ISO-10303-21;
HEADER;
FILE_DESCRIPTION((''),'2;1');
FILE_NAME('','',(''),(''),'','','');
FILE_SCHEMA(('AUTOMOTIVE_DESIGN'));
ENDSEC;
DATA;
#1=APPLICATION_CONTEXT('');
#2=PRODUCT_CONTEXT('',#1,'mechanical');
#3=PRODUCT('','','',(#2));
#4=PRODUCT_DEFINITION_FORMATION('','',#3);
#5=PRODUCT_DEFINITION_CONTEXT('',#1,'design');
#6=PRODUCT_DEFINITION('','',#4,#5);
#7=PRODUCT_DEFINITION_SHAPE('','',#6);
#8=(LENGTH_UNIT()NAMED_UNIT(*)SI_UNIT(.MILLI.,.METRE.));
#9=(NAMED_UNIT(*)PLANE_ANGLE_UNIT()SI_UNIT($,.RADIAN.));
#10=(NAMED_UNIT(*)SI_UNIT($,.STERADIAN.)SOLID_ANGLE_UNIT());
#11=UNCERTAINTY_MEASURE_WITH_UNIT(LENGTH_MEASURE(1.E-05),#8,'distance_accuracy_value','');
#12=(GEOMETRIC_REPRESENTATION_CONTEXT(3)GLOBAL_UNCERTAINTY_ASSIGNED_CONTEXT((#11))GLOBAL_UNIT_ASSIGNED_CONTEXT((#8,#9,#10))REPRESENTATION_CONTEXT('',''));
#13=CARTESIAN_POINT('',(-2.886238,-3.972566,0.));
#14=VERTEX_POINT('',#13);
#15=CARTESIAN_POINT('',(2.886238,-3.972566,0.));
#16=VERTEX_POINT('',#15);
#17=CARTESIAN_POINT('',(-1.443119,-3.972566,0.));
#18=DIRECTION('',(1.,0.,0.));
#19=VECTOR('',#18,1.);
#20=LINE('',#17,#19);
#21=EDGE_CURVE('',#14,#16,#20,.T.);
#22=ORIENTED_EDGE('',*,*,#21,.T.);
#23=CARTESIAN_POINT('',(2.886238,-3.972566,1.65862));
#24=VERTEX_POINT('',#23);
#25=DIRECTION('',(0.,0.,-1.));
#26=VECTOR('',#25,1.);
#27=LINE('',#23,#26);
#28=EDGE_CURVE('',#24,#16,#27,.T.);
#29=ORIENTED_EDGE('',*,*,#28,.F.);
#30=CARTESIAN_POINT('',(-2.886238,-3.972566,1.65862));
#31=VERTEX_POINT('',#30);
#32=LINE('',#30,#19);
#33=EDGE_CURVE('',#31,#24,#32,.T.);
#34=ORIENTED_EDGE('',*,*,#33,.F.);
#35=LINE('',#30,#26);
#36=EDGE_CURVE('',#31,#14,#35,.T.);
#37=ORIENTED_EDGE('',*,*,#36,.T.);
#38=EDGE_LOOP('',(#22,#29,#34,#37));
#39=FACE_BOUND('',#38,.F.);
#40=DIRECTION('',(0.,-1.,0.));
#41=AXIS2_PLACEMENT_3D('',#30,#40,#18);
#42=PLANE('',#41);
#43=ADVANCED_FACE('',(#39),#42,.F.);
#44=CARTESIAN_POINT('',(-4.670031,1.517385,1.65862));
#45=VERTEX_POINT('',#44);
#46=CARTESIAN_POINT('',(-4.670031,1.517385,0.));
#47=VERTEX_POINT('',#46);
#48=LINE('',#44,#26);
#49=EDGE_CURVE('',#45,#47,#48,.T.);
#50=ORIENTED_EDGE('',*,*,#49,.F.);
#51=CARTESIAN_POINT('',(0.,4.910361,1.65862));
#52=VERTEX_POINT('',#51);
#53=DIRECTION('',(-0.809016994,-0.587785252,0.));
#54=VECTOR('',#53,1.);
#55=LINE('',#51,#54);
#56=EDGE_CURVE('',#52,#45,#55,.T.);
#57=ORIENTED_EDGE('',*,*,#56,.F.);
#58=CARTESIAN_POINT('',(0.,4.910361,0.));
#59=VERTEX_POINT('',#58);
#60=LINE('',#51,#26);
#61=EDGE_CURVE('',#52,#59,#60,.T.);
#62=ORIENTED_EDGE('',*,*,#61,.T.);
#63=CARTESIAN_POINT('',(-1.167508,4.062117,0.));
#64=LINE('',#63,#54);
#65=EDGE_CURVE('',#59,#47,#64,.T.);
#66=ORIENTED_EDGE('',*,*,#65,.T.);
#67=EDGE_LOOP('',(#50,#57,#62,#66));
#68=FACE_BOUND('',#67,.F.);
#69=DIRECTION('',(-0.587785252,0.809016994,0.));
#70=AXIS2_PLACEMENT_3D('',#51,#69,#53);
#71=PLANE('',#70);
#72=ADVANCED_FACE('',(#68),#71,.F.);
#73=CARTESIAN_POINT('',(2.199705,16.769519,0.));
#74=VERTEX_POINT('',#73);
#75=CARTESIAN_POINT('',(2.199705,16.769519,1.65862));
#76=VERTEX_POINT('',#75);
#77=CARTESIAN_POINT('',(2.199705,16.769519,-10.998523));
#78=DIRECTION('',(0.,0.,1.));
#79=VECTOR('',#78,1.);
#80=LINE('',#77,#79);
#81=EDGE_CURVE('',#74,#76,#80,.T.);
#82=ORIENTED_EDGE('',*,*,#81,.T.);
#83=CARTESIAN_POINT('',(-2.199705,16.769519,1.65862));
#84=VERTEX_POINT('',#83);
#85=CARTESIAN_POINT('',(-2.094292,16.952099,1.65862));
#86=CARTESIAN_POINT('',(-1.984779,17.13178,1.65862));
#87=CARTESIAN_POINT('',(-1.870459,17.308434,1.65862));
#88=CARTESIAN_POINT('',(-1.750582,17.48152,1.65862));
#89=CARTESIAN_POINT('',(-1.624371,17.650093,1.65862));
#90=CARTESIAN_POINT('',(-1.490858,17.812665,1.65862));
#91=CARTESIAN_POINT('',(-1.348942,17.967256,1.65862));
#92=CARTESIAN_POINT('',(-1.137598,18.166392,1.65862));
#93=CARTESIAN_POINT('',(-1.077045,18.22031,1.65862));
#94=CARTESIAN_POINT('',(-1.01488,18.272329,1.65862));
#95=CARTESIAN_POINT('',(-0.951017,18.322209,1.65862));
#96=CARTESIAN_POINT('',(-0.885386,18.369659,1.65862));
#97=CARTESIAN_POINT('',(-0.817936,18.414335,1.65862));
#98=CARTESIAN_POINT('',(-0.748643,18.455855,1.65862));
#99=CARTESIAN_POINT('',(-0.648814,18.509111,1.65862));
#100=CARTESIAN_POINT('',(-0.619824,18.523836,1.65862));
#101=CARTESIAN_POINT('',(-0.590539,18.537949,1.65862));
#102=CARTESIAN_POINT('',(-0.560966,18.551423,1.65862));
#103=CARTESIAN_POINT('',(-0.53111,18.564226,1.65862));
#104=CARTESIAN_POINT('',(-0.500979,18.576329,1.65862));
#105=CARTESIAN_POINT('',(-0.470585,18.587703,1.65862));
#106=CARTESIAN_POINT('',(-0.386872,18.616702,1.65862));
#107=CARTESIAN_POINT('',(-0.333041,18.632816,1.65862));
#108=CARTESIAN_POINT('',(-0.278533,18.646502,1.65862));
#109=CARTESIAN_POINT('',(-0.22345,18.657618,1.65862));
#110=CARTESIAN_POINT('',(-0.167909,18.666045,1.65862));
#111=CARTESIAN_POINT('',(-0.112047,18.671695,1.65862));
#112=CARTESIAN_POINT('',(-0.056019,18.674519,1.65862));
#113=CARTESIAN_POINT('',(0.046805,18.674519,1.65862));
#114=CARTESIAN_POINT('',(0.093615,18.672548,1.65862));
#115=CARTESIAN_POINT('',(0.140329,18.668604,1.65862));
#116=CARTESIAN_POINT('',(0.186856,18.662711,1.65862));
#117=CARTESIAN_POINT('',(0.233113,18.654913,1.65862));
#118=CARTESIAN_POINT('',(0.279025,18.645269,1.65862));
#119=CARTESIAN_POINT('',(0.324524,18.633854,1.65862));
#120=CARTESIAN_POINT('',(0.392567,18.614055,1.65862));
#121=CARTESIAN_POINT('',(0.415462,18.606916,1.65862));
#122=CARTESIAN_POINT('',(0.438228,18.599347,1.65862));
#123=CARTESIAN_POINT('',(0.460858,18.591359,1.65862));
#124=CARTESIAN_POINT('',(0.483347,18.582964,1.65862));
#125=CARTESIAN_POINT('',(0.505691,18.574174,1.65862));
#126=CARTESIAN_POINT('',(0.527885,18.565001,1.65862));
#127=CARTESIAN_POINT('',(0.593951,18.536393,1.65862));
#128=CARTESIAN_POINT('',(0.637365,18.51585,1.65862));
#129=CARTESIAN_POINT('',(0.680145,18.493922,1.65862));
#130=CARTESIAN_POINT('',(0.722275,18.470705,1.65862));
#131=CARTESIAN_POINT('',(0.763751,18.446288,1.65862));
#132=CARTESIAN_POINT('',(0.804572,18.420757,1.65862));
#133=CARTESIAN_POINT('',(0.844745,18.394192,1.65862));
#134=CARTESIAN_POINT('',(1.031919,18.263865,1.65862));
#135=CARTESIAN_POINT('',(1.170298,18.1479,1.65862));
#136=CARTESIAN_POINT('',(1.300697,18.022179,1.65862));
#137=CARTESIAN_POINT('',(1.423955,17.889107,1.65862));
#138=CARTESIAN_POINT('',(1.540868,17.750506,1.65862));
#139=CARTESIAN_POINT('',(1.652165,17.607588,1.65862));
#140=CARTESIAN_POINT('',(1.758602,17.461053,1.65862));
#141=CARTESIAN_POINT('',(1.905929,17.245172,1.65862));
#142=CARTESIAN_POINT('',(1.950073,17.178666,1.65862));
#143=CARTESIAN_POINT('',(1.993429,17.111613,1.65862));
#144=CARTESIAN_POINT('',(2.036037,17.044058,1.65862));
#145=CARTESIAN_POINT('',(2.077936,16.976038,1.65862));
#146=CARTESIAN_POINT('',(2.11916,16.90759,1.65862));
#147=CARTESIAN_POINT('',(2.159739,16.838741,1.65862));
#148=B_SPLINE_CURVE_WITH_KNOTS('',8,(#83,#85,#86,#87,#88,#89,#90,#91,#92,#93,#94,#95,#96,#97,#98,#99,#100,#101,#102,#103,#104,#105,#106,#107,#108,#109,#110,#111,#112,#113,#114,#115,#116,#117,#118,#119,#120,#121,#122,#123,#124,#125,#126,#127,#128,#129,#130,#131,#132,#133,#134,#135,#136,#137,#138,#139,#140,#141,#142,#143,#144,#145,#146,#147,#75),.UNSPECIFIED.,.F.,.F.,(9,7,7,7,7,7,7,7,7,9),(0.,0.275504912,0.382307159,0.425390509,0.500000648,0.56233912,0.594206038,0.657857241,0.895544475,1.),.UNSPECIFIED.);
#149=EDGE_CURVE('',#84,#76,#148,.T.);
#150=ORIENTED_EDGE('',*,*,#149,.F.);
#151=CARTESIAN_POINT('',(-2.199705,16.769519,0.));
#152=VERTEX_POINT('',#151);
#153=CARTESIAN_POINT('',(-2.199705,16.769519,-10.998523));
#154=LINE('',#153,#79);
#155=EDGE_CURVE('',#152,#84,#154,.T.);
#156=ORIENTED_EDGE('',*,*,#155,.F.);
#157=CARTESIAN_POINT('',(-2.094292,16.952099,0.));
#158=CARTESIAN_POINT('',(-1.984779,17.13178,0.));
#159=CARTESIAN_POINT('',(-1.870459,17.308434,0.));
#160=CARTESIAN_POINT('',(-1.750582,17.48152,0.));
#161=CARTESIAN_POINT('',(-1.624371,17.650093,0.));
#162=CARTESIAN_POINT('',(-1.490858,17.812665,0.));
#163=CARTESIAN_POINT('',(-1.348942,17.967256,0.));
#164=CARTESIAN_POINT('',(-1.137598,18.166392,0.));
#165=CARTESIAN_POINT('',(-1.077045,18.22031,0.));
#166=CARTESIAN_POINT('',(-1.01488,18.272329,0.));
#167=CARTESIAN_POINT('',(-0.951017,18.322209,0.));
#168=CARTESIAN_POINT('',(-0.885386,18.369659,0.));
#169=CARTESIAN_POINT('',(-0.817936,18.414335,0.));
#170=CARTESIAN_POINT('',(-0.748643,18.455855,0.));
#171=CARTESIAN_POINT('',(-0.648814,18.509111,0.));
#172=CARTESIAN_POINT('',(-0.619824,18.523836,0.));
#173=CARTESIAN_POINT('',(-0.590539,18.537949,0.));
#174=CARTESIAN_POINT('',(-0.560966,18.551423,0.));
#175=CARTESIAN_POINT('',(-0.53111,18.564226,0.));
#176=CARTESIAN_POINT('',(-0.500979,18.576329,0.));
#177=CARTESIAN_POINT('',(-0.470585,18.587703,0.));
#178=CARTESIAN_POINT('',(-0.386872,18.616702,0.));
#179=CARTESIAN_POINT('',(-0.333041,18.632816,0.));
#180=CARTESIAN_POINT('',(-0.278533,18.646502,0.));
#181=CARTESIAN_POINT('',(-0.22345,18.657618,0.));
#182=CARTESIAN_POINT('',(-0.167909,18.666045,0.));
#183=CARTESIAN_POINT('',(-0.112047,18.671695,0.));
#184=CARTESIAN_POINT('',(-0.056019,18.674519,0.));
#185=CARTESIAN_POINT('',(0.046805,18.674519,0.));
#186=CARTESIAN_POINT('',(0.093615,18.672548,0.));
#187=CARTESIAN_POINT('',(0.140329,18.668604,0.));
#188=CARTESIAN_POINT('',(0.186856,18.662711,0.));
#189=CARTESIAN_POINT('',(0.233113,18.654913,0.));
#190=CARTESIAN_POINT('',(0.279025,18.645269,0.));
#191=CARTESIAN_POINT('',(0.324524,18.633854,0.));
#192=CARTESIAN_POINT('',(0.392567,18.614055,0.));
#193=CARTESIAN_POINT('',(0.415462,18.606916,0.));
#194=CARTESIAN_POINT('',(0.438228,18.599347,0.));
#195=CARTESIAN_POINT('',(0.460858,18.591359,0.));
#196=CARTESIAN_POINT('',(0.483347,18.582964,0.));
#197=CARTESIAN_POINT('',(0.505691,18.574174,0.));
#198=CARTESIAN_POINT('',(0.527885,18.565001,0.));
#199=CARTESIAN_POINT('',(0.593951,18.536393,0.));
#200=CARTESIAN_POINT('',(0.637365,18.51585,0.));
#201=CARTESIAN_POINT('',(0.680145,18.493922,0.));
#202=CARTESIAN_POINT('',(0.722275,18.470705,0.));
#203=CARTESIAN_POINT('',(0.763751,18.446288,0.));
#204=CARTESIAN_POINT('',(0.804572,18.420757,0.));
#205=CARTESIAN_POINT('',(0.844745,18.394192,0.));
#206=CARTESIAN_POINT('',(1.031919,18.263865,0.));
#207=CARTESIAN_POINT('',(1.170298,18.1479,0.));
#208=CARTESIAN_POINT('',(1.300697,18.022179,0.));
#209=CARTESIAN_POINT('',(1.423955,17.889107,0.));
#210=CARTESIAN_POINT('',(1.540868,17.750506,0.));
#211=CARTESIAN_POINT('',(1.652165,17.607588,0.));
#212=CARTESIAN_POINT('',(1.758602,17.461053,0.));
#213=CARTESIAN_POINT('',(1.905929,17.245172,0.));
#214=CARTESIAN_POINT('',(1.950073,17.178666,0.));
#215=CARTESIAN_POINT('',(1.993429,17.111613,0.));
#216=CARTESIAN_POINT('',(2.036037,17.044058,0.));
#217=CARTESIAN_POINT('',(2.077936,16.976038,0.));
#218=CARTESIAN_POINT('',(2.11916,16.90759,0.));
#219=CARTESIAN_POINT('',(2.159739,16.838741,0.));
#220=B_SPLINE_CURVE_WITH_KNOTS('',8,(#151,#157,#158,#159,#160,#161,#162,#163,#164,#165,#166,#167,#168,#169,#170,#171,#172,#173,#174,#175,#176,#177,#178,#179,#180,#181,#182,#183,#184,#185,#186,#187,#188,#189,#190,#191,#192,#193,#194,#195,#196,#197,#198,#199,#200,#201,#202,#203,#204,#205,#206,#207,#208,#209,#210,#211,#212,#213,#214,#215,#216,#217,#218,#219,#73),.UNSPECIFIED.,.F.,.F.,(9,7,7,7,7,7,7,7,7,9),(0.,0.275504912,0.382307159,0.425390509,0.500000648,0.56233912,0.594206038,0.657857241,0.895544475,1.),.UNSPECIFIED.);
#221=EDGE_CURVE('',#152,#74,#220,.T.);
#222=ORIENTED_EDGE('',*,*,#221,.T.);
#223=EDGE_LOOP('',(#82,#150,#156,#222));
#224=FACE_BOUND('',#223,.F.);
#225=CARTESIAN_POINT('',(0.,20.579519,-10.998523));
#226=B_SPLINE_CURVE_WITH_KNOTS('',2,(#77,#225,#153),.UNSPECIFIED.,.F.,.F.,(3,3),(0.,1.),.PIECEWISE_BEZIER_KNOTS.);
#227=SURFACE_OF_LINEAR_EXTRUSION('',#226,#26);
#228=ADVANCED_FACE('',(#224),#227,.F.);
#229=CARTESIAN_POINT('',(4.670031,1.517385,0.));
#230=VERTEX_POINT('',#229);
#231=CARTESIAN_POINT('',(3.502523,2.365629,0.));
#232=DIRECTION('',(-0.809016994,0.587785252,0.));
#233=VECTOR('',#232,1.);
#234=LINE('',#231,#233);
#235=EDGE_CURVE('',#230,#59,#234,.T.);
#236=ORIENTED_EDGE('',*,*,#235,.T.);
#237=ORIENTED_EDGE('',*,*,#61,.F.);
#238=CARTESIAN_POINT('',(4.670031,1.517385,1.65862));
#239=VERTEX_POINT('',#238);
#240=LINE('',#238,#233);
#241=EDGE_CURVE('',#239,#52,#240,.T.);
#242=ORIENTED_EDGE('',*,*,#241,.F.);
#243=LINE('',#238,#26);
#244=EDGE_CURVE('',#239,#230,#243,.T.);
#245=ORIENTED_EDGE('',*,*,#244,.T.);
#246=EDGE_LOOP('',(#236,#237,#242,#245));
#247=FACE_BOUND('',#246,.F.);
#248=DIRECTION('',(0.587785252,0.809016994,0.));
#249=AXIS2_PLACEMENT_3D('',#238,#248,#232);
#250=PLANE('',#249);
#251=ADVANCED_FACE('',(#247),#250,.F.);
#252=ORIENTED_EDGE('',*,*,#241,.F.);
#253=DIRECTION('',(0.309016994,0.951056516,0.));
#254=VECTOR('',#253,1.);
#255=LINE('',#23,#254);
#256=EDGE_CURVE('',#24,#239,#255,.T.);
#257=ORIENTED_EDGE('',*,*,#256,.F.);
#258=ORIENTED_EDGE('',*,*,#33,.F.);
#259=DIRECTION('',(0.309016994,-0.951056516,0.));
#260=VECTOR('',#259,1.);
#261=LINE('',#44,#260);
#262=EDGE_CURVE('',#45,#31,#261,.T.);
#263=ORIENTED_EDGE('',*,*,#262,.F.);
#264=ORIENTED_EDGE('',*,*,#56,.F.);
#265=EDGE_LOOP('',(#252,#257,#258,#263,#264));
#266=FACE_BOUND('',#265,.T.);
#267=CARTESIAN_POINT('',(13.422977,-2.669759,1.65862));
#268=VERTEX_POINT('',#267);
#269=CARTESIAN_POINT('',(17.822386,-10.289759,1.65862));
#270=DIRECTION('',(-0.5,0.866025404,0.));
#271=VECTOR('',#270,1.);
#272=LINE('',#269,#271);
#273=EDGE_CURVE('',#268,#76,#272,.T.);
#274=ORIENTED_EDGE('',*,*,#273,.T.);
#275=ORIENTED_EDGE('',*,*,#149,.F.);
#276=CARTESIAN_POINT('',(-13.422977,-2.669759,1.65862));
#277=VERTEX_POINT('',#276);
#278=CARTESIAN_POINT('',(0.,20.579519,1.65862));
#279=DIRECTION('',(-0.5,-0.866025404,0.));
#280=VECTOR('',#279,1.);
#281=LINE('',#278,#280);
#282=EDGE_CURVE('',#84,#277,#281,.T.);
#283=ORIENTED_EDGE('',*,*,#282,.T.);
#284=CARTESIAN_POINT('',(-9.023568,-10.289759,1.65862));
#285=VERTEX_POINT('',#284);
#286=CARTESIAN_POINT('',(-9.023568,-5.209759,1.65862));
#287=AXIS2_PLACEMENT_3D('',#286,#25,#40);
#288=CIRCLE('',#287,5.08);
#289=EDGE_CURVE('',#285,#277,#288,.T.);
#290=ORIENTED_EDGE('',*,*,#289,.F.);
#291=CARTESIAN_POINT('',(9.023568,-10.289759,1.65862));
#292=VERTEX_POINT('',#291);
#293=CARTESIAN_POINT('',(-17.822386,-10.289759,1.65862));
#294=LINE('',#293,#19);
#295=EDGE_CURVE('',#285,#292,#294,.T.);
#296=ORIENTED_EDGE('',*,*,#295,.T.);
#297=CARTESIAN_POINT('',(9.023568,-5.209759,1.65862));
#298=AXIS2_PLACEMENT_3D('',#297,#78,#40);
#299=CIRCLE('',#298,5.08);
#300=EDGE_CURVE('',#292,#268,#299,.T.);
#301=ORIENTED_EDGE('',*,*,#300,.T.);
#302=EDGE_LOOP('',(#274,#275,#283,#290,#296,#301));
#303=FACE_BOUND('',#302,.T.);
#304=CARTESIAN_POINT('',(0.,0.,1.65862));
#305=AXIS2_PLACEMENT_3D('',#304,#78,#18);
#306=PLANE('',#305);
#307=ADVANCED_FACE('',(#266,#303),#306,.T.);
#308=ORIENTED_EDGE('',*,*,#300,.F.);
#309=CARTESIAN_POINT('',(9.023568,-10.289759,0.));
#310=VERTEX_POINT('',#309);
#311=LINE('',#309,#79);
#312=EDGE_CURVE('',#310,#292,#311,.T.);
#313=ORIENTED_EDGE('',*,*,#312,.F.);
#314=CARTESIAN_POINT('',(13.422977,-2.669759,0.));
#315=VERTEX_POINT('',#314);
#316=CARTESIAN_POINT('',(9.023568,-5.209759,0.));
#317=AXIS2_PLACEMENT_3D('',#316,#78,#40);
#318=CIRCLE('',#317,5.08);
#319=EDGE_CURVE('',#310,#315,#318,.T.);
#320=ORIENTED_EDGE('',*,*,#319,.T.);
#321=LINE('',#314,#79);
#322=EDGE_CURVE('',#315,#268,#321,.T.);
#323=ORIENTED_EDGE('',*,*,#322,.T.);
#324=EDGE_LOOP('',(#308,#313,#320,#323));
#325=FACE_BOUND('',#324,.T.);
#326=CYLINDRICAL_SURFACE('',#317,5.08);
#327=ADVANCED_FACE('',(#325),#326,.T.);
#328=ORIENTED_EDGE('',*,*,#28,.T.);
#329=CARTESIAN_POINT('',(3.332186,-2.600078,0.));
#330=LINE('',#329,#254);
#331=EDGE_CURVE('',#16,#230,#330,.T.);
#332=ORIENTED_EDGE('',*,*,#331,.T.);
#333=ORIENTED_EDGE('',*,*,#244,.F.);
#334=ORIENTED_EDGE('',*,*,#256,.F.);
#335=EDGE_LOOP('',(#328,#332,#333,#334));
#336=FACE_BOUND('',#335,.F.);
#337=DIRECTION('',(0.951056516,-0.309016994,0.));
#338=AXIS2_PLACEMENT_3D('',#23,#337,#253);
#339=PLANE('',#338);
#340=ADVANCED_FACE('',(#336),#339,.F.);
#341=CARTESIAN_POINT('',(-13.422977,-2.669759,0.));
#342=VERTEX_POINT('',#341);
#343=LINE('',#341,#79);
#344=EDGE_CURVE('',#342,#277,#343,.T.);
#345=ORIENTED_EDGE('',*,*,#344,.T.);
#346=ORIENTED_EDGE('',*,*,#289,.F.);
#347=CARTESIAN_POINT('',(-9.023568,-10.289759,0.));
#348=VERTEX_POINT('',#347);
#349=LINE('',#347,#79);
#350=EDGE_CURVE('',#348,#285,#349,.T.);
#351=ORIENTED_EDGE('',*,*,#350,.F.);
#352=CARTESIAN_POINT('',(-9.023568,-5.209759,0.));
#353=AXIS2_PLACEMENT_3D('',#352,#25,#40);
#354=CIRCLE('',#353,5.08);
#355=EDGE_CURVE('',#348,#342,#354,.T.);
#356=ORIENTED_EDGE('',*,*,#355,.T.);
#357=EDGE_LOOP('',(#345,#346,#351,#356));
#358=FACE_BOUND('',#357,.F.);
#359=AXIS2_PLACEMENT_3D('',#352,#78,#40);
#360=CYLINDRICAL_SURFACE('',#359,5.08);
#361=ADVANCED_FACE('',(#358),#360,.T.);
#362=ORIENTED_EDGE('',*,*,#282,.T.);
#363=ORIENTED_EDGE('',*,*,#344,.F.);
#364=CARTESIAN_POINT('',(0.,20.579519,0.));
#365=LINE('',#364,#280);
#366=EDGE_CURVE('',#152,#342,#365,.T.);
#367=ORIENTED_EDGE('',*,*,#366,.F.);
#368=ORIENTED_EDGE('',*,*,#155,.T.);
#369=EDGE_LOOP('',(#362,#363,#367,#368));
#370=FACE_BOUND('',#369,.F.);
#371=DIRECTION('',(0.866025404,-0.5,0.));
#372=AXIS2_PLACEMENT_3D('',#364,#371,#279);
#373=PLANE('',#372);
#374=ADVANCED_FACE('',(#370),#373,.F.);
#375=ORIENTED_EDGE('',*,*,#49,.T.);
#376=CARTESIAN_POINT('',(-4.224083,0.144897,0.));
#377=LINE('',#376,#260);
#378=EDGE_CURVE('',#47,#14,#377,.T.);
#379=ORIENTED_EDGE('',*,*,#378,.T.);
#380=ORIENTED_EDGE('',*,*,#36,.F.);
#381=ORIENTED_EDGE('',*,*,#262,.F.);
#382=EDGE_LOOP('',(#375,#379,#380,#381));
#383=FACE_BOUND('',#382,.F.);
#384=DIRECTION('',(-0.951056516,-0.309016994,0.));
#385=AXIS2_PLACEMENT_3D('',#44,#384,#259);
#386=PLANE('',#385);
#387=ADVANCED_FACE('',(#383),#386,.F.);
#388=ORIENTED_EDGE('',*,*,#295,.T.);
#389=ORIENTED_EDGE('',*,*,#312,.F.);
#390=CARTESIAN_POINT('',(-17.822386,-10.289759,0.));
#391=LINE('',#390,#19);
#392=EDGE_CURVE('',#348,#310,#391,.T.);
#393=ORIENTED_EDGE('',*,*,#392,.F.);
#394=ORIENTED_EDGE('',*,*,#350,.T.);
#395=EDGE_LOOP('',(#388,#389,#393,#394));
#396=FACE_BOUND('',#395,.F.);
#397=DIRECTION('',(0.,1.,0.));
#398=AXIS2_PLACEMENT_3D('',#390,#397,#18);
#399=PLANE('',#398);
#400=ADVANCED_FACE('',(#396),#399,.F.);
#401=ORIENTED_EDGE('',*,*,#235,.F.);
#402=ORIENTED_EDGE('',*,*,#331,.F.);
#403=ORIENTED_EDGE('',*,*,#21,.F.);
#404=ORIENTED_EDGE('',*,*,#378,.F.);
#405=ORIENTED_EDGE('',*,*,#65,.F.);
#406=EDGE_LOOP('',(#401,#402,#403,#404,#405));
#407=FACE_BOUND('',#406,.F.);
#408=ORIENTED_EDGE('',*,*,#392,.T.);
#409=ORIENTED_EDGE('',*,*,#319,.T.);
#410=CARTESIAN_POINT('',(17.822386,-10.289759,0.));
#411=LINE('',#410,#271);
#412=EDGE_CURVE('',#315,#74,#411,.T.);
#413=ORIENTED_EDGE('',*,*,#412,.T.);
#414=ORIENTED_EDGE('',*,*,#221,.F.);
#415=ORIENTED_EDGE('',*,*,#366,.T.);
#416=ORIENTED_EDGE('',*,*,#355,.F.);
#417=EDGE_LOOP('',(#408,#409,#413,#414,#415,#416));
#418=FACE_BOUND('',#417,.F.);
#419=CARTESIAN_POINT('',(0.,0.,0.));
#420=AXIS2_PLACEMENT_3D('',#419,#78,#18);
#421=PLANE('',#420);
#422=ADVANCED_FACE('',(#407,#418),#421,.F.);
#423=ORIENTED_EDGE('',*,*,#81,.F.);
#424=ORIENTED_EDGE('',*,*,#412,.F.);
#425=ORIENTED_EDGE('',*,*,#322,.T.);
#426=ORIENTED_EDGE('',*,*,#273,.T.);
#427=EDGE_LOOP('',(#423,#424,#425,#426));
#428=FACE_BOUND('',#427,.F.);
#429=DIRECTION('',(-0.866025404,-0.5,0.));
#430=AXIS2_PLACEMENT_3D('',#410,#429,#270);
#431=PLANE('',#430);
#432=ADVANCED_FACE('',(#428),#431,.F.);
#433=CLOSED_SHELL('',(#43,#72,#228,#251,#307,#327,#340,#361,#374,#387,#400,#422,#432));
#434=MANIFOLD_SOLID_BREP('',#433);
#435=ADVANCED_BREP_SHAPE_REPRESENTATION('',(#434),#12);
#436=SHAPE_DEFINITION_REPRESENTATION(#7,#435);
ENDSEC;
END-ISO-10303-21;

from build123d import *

# Parameters (mm, degrees)
F1_DEPTH    = 1.65862
F2_T1_DEPTH = 23.6556652561
F3_R        = 5.08
F4_R        = 5.08
F6_DEPTH    = 25.4


# Not quite as in the source:
# - a fillet or chamfer that OpenCascade refuses, or shapes differently, is made with other operations: its cross-section is extruded or revolved along the edge and cut away or added


with BuildPart() as f1:
    # F0 (on Top) → F1 (new body)
    with BuildSketch(Plane.XY):
        Polygon((17.8223861725, -10.2897594543), (0, 20.5795189086), (-17.8223861725, -10.2897594543), align=None)
    extrude(amount=F1_DEPTH)

    # F2: fillet of radius 2.54 on 1 edges, made by hand

    # F2_s2 → F2_t1 (cut)
    with BuildSketch(Plane.XY.offset(-10.9985226281)):
        with BuildLine():
            add(Edge.make_bspline(
                [(2.1997045256, 16.7695189086), (0, 20.5795189086), (-2.1997045256, 16.7695189086)],
                knots=[0, 0, 0, 1, 1, 1], degree=2, weights=[1, 1, 1]))
            Line((-2.1997045256, 16.7695189086), (0, 20.5795189086))
            Line((0, 20.5795189086), (2.1997045256, 16.7695189086))
        make_face()
    extrude(amount=F2_T1_DEPTH, mode=Mode.SUBTRACT)

    # F3
    f3_edges = [f1.edges().sort_by_distance(p)[0] for p in [
        (-17.822386, -10.289759, 0.82931),
    ]]
    fillet(f3_edges, radius=F3_R)

    # F4
    f4_edges = [f1.edges().sort_by_distance(p)[0] for p in [
        (17.822386, -10.289759, 0.82931),
    ]]
    fillet(f4_edges, radius=F4_R)

    # F5 (on face) → F6 (cut)
    with BuildSketch(Plane.XY.offset(1.65862)):
        Polygon((4.6700308471, 1.5173850042), (0, 4.9103610218), (-4.6700308471, 1.5173850042), (-2.886237792, -3.9725655151), (2.886237792, -3.9725655151), align=None)
    extrude(amount=-F6_DEPTH, mode=Mode.SUBTRACT)


solid = f1.part
